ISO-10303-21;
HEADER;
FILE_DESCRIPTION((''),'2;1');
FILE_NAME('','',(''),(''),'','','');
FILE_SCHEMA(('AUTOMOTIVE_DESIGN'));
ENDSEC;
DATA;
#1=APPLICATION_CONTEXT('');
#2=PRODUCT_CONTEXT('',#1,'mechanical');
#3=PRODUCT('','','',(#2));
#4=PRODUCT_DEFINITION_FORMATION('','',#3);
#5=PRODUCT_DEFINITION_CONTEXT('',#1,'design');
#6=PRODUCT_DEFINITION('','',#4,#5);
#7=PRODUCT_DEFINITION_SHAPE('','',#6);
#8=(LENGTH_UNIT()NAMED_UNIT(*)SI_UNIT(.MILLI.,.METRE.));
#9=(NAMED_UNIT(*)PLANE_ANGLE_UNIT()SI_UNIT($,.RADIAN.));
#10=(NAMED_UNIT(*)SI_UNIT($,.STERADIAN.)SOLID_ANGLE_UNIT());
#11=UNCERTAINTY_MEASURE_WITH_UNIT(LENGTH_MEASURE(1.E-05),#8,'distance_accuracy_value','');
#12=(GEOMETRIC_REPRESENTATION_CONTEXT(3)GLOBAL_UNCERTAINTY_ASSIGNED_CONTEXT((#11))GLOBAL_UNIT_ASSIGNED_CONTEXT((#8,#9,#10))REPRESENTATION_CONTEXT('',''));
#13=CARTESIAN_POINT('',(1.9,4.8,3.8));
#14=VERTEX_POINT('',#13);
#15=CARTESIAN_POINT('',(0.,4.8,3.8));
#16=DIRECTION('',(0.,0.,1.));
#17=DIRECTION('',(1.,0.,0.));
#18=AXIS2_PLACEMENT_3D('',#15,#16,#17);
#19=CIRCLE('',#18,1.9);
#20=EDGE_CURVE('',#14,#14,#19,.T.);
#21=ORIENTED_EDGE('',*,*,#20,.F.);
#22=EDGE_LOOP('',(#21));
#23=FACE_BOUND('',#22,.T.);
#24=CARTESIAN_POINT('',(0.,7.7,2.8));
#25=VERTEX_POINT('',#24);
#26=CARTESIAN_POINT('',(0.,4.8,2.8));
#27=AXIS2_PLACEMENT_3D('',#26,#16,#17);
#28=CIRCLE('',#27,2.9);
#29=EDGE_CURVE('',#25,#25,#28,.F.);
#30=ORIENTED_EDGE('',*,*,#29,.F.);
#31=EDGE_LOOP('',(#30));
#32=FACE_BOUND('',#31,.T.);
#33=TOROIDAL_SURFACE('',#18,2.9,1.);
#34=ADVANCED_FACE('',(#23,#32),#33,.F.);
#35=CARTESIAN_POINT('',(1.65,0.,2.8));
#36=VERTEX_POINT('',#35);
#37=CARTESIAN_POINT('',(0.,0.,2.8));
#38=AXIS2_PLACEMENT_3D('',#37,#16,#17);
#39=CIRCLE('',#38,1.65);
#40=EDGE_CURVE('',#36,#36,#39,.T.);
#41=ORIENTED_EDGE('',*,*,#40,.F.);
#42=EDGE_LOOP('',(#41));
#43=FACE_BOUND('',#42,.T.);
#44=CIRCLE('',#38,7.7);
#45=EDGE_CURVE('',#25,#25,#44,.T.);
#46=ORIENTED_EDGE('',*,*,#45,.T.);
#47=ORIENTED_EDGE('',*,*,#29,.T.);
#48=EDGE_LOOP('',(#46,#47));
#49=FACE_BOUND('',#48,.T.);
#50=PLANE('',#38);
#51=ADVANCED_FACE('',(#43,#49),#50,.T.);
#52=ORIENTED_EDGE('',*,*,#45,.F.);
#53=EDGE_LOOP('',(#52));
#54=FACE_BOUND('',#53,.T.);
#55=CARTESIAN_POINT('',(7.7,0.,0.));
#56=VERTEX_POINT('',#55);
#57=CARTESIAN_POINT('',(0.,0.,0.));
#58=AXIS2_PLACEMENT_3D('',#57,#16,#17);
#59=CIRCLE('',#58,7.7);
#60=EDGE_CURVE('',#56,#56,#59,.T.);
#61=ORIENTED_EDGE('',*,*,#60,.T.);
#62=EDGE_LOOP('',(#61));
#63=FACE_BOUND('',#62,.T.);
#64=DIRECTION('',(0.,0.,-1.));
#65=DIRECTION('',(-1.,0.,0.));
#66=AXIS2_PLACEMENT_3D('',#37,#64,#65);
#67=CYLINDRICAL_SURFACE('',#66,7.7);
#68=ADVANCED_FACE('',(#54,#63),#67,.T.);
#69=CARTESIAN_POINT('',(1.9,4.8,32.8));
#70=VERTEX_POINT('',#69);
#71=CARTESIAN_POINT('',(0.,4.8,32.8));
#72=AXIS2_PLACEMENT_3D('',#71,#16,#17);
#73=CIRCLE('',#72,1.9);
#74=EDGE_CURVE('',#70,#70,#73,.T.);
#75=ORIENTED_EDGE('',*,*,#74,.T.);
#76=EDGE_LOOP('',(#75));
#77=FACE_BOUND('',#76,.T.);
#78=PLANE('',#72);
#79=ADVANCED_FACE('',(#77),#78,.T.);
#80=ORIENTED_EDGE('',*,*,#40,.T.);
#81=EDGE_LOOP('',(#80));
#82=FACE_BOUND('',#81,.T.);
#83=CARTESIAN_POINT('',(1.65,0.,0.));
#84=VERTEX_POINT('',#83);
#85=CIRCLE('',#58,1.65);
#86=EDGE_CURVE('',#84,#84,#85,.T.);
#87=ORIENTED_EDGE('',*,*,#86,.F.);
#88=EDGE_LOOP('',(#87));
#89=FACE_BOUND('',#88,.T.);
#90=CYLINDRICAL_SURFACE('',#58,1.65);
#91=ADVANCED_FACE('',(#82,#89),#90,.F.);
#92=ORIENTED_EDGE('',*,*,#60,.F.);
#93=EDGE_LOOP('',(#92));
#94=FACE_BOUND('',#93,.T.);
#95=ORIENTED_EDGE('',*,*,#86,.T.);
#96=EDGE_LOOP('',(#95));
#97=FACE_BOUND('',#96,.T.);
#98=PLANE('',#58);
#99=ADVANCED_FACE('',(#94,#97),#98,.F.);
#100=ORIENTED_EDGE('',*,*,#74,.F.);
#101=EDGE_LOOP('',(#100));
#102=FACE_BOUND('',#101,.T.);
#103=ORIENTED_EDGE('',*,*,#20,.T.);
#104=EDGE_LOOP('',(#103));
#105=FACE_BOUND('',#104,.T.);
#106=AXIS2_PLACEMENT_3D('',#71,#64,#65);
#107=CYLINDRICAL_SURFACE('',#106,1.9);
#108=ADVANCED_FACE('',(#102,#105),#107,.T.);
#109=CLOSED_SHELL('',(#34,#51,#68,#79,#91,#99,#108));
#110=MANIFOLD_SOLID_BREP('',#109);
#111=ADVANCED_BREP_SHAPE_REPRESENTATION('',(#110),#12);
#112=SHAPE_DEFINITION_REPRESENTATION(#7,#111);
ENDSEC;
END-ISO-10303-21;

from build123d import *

# Parameters (mm, degrees)
ESQUISSE1_R             = 7.7
BOSS_EXTRU_1_DEPTH      = 2.8
ESQUISSE2_R             = 1.9
BOSS_EXTRU_2_DEPTH      = 30
ESQUISSE3_R             = 1.65
ENL_V_MAT_EXTRU_1_DEPTH = 32.91520014
CONG_2_R                = 1


with BuildPart() as part:
    # Esquisse1 → Boss.-Extru.1 (new body)
    with BuildSketch(Plane.XY):
        Circle(ESQUISSE1_R)
    extrude(amount=BOSS_EXTRU_1_DEPTH)

    # Esquisse2 → Boss.-Extru.2 (add)
    with BuildSketch(Plane.XY.offset(2.8)):
        with Locations((0, 4.8)):
            Circle(ESQUISSE2_R)
    extrude(amount=BOSS_EXTRU_2_DEPTH)

    # Esquisse3 → Enlèv. mat.-Extru.1 (cut, through all)
    with BuildSketch(Plane.XY.offset(2.8)):
        Circle(ESQUISSE3_R)
    extrude(amount=-ENL_V_MAT_EXTRU_1_DEPTH, mode=Mode.SUBTRACT)

    # Congé2
    cong_2_edges = [part.edges().sort_by_distance(p)[0] for p in [
        (-1.9, 4.8, 2.8),
    ]]
    fillet(cong_2_edges, radius=CONG_2_R - 0.0001)  # a hair under: the kernel refuses the full size


solid = part.part
